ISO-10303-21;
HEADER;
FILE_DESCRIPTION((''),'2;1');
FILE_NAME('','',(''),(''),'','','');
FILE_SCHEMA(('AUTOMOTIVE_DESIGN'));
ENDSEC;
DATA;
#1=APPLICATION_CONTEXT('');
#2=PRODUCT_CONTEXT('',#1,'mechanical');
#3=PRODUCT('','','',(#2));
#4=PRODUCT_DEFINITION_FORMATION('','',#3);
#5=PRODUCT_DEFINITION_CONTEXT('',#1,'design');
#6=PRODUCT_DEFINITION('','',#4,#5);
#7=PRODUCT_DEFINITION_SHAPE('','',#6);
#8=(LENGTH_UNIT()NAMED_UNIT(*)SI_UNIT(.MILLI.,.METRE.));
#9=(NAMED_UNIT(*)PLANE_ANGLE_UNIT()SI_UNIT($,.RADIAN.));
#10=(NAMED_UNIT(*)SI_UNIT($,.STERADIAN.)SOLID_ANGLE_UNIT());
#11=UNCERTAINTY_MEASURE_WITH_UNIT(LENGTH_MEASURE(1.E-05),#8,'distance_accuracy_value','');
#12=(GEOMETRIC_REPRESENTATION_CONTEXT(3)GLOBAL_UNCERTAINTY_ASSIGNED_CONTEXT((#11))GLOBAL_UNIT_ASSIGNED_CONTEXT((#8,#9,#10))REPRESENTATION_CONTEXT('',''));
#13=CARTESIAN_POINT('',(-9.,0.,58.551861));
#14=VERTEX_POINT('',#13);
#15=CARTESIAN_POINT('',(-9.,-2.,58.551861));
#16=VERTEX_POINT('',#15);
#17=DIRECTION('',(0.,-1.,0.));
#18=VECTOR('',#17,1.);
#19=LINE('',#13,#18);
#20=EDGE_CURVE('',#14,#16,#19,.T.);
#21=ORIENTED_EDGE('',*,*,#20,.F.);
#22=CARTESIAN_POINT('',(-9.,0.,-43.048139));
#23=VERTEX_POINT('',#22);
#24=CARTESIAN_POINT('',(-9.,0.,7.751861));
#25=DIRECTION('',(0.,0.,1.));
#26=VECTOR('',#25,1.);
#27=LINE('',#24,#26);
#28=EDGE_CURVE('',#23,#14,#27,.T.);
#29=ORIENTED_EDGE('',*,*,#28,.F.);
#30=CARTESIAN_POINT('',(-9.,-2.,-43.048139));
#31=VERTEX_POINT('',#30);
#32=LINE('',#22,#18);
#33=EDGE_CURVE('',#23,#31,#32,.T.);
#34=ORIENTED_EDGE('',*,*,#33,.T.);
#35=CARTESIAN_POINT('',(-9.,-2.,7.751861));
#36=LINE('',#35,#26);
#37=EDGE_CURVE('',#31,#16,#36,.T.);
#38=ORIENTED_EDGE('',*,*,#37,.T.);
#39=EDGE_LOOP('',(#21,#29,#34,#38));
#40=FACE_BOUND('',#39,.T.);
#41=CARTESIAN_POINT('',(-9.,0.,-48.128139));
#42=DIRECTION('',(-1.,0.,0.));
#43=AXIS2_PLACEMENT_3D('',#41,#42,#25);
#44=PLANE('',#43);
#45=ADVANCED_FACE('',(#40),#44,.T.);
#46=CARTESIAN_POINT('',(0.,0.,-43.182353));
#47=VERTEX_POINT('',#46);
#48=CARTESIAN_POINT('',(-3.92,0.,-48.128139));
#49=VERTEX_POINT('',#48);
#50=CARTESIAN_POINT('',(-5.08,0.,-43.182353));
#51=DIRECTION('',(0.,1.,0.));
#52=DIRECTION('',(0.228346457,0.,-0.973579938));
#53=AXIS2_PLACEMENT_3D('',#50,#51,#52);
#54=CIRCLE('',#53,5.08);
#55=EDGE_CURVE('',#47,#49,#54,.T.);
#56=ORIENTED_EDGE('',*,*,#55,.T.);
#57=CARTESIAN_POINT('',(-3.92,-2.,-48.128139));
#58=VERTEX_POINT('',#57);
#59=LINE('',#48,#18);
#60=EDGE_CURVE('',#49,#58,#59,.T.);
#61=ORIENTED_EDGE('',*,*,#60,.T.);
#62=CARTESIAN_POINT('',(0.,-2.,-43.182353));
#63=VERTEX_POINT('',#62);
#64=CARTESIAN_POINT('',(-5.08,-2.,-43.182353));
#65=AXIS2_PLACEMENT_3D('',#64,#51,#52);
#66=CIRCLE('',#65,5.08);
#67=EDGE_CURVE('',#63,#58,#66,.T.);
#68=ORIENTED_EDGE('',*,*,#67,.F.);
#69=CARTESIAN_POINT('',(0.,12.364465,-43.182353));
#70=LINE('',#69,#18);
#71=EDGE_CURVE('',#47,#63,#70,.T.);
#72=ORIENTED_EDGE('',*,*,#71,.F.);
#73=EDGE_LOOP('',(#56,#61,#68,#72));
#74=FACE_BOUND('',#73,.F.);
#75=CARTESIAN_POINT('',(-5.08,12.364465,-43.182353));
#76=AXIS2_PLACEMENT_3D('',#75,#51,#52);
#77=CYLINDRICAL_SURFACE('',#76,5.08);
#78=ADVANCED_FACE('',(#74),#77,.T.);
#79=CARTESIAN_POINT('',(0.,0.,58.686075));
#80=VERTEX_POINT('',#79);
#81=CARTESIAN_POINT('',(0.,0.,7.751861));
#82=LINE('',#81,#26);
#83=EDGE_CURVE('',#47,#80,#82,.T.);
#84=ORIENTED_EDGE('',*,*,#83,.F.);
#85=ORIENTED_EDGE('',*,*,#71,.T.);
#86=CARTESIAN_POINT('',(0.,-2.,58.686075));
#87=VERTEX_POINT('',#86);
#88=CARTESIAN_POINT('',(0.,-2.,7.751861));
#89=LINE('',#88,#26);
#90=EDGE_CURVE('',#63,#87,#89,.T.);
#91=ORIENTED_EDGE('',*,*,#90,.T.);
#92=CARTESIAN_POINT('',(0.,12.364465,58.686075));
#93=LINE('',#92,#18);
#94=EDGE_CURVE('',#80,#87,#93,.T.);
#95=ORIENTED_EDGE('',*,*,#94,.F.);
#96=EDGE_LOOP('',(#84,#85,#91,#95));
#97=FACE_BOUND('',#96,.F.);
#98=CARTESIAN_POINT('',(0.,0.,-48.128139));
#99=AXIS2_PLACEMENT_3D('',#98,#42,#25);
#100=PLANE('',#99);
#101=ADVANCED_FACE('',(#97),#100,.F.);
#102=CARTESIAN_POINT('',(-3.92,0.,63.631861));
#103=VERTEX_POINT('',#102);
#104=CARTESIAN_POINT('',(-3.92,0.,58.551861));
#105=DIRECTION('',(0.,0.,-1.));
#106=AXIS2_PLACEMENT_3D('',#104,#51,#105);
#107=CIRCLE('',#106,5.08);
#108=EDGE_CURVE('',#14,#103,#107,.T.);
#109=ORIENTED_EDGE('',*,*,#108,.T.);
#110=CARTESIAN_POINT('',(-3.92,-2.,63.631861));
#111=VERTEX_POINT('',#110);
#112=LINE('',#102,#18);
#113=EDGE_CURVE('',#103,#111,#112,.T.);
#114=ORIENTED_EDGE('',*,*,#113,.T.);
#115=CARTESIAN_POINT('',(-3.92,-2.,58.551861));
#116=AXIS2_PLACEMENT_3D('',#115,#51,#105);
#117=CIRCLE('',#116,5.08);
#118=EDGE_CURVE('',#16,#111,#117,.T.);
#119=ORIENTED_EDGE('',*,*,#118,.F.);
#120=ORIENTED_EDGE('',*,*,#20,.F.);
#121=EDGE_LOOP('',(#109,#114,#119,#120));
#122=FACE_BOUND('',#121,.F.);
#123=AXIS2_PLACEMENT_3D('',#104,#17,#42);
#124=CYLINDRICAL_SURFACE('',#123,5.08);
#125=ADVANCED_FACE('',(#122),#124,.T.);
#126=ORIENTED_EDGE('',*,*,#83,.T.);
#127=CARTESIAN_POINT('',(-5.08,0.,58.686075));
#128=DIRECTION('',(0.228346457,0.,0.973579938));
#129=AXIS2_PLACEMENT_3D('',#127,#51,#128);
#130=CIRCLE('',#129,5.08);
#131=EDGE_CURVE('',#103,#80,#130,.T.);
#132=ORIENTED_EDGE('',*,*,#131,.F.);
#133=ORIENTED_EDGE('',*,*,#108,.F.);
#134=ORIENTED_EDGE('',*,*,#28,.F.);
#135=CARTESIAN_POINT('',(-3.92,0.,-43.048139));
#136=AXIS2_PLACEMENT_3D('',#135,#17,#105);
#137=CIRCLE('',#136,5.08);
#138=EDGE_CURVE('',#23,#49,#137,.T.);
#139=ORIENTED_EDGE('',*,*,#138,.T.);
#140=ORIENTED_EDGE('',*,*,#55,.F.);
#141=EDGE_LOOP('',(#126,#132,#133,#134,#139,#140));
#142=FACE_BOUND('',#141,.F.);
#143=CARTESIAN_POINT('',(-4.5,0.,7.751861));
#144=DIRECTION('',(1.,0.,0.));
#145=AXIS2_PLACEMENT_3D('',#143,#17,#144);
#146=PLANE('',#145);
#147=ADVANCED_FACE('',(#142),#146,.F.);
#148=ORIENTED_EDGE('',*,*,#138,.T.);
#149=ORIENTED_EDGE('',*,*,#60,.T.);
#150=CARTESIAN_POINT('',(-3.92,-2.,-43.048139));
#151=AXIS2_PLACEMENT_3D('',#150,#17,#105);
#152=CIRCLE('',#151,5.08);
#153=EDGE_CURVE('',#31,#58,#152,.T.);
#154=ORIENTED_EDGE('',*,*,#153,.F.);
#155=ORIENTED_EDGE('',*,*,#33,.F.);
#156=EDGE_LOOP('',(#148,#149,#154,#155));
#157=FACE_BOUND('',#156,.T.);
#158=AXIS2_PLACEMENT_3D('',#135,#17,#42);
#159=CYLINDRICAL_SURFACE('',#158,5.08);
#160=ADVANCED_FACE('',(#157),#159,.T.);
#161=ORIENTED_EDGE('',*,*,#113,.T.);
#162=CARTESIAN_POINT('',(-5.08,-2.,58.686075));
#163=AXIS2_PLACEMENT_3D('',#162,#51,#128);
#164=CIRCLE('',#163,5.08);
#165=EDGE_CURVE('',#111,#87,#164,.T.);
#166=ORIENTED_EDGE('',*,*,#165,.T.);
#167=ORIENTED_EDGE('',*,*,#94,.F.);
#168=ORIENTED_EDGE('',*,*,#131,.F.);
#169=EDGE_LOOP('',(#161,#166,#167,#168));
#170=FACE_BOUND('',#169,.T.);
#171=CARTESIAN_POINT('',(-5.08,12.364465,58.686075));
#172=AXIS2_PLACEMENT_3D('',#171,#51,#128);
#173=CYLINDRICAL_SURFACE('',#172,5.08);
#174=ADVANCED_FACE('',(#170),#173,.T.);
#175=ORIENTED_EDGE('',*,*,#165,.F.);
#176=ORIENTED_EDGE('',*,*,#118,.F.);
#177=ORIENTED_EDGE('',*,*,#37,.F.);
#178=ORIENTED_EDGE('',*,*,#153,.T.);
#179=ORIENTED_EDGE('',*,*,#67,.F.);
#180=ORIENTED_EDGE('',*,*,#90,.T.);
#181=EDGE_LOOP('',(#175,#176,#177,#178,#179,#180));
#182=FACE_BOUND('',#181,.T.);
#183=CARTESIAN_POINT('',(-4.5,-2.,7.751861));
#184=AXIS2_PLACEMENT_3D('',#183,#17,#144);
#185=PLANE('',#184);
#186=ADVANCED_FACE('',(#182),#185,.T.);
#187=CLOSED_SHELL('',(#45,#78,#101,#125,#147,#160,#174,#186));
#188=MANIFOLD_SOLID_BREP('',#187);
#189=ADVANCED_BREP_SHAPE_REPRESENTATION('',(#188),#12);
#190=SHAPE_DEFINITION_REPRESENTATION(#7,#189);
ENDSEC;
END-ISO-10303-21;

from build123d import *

# Parameters (mm, degrees)
F0_W        = 9
F0_H        = 111.76
F1_DEPTH    = 2
F2_R        = 5.08
F3_T1_DEPTH = 26.7289304257
F4_R        = 5.08
F5_T1_DEPTH = 26.7289304257


# Not quite as in the source:
# - a fillet or chamfer that OpenCascade refuses, or shapes differently, is made with other operations: its cross-section is extruded or revolved along the edge and cut away or added


with BuildPart() as f1:
    # F0 (on Front) → F1 (new body)
    with BuildSketch(Plane.XZ):
        with Locations((-4.5, 7.7518613339)):
            Rectangle(F0_W, F0_H)
    extrude(amount=F1_DEPTH)

    # F2
    f2_edges = [f1.edges().sort_by_distance(p)[0] for p in [
        (-9, -1, 63.631861),
    ]]
    fillet(f2_edges, radius=F2_R)

    # F3: fillet of radius 5.08 on 1 edges, made by hand

    # F3_s2 → F3_t1 (cut)
    with BuildSketch(Plane.XZ.offset(-12.3644652129)):
        with BuildLine():
            ThreePointArc((-3.92, 63.6318613339), (-1.0988443889, 61.8415149962), (0, 58.6860752487))
            Line((0, 58.6860752487), (0, 63.6318613339))
            Line((0, 63.6318613339), (-3.92, 63.6318613339))
        make_face()
    extrude(amount=F3_T1_DEPTH, mode=Mode.SUBTRACT)

    # F4
    f4_edges = [f1.edges().sort_by_distance(p)[0] for p in [
        (-9, -1, -48.128139),
    ]]
    fillet(f4_edges, radius=F4_R)

    # F5: fillet of radius 5.08 on 1 edges, made by hand

    # F5_s2 → F5_t1 (cut)
    with BuildSketch(Plane.XZ.offset(-12.3644652129)):
        with BuildLine():
            ThreePointArc((-3.92, -48.1281386661), (-1.0988443889, -46.3377923285), (0, -43.182352581))
            Line((0, -43.182352581), (0, -48.1281386661))
            Line((0, -48.1281386661), (-3.92, -48.1281386661))
        make_face()
    extrude(amount=F5_T1_DEPTH, mode=Mode.SUBTRACT)


solid = f1.part
